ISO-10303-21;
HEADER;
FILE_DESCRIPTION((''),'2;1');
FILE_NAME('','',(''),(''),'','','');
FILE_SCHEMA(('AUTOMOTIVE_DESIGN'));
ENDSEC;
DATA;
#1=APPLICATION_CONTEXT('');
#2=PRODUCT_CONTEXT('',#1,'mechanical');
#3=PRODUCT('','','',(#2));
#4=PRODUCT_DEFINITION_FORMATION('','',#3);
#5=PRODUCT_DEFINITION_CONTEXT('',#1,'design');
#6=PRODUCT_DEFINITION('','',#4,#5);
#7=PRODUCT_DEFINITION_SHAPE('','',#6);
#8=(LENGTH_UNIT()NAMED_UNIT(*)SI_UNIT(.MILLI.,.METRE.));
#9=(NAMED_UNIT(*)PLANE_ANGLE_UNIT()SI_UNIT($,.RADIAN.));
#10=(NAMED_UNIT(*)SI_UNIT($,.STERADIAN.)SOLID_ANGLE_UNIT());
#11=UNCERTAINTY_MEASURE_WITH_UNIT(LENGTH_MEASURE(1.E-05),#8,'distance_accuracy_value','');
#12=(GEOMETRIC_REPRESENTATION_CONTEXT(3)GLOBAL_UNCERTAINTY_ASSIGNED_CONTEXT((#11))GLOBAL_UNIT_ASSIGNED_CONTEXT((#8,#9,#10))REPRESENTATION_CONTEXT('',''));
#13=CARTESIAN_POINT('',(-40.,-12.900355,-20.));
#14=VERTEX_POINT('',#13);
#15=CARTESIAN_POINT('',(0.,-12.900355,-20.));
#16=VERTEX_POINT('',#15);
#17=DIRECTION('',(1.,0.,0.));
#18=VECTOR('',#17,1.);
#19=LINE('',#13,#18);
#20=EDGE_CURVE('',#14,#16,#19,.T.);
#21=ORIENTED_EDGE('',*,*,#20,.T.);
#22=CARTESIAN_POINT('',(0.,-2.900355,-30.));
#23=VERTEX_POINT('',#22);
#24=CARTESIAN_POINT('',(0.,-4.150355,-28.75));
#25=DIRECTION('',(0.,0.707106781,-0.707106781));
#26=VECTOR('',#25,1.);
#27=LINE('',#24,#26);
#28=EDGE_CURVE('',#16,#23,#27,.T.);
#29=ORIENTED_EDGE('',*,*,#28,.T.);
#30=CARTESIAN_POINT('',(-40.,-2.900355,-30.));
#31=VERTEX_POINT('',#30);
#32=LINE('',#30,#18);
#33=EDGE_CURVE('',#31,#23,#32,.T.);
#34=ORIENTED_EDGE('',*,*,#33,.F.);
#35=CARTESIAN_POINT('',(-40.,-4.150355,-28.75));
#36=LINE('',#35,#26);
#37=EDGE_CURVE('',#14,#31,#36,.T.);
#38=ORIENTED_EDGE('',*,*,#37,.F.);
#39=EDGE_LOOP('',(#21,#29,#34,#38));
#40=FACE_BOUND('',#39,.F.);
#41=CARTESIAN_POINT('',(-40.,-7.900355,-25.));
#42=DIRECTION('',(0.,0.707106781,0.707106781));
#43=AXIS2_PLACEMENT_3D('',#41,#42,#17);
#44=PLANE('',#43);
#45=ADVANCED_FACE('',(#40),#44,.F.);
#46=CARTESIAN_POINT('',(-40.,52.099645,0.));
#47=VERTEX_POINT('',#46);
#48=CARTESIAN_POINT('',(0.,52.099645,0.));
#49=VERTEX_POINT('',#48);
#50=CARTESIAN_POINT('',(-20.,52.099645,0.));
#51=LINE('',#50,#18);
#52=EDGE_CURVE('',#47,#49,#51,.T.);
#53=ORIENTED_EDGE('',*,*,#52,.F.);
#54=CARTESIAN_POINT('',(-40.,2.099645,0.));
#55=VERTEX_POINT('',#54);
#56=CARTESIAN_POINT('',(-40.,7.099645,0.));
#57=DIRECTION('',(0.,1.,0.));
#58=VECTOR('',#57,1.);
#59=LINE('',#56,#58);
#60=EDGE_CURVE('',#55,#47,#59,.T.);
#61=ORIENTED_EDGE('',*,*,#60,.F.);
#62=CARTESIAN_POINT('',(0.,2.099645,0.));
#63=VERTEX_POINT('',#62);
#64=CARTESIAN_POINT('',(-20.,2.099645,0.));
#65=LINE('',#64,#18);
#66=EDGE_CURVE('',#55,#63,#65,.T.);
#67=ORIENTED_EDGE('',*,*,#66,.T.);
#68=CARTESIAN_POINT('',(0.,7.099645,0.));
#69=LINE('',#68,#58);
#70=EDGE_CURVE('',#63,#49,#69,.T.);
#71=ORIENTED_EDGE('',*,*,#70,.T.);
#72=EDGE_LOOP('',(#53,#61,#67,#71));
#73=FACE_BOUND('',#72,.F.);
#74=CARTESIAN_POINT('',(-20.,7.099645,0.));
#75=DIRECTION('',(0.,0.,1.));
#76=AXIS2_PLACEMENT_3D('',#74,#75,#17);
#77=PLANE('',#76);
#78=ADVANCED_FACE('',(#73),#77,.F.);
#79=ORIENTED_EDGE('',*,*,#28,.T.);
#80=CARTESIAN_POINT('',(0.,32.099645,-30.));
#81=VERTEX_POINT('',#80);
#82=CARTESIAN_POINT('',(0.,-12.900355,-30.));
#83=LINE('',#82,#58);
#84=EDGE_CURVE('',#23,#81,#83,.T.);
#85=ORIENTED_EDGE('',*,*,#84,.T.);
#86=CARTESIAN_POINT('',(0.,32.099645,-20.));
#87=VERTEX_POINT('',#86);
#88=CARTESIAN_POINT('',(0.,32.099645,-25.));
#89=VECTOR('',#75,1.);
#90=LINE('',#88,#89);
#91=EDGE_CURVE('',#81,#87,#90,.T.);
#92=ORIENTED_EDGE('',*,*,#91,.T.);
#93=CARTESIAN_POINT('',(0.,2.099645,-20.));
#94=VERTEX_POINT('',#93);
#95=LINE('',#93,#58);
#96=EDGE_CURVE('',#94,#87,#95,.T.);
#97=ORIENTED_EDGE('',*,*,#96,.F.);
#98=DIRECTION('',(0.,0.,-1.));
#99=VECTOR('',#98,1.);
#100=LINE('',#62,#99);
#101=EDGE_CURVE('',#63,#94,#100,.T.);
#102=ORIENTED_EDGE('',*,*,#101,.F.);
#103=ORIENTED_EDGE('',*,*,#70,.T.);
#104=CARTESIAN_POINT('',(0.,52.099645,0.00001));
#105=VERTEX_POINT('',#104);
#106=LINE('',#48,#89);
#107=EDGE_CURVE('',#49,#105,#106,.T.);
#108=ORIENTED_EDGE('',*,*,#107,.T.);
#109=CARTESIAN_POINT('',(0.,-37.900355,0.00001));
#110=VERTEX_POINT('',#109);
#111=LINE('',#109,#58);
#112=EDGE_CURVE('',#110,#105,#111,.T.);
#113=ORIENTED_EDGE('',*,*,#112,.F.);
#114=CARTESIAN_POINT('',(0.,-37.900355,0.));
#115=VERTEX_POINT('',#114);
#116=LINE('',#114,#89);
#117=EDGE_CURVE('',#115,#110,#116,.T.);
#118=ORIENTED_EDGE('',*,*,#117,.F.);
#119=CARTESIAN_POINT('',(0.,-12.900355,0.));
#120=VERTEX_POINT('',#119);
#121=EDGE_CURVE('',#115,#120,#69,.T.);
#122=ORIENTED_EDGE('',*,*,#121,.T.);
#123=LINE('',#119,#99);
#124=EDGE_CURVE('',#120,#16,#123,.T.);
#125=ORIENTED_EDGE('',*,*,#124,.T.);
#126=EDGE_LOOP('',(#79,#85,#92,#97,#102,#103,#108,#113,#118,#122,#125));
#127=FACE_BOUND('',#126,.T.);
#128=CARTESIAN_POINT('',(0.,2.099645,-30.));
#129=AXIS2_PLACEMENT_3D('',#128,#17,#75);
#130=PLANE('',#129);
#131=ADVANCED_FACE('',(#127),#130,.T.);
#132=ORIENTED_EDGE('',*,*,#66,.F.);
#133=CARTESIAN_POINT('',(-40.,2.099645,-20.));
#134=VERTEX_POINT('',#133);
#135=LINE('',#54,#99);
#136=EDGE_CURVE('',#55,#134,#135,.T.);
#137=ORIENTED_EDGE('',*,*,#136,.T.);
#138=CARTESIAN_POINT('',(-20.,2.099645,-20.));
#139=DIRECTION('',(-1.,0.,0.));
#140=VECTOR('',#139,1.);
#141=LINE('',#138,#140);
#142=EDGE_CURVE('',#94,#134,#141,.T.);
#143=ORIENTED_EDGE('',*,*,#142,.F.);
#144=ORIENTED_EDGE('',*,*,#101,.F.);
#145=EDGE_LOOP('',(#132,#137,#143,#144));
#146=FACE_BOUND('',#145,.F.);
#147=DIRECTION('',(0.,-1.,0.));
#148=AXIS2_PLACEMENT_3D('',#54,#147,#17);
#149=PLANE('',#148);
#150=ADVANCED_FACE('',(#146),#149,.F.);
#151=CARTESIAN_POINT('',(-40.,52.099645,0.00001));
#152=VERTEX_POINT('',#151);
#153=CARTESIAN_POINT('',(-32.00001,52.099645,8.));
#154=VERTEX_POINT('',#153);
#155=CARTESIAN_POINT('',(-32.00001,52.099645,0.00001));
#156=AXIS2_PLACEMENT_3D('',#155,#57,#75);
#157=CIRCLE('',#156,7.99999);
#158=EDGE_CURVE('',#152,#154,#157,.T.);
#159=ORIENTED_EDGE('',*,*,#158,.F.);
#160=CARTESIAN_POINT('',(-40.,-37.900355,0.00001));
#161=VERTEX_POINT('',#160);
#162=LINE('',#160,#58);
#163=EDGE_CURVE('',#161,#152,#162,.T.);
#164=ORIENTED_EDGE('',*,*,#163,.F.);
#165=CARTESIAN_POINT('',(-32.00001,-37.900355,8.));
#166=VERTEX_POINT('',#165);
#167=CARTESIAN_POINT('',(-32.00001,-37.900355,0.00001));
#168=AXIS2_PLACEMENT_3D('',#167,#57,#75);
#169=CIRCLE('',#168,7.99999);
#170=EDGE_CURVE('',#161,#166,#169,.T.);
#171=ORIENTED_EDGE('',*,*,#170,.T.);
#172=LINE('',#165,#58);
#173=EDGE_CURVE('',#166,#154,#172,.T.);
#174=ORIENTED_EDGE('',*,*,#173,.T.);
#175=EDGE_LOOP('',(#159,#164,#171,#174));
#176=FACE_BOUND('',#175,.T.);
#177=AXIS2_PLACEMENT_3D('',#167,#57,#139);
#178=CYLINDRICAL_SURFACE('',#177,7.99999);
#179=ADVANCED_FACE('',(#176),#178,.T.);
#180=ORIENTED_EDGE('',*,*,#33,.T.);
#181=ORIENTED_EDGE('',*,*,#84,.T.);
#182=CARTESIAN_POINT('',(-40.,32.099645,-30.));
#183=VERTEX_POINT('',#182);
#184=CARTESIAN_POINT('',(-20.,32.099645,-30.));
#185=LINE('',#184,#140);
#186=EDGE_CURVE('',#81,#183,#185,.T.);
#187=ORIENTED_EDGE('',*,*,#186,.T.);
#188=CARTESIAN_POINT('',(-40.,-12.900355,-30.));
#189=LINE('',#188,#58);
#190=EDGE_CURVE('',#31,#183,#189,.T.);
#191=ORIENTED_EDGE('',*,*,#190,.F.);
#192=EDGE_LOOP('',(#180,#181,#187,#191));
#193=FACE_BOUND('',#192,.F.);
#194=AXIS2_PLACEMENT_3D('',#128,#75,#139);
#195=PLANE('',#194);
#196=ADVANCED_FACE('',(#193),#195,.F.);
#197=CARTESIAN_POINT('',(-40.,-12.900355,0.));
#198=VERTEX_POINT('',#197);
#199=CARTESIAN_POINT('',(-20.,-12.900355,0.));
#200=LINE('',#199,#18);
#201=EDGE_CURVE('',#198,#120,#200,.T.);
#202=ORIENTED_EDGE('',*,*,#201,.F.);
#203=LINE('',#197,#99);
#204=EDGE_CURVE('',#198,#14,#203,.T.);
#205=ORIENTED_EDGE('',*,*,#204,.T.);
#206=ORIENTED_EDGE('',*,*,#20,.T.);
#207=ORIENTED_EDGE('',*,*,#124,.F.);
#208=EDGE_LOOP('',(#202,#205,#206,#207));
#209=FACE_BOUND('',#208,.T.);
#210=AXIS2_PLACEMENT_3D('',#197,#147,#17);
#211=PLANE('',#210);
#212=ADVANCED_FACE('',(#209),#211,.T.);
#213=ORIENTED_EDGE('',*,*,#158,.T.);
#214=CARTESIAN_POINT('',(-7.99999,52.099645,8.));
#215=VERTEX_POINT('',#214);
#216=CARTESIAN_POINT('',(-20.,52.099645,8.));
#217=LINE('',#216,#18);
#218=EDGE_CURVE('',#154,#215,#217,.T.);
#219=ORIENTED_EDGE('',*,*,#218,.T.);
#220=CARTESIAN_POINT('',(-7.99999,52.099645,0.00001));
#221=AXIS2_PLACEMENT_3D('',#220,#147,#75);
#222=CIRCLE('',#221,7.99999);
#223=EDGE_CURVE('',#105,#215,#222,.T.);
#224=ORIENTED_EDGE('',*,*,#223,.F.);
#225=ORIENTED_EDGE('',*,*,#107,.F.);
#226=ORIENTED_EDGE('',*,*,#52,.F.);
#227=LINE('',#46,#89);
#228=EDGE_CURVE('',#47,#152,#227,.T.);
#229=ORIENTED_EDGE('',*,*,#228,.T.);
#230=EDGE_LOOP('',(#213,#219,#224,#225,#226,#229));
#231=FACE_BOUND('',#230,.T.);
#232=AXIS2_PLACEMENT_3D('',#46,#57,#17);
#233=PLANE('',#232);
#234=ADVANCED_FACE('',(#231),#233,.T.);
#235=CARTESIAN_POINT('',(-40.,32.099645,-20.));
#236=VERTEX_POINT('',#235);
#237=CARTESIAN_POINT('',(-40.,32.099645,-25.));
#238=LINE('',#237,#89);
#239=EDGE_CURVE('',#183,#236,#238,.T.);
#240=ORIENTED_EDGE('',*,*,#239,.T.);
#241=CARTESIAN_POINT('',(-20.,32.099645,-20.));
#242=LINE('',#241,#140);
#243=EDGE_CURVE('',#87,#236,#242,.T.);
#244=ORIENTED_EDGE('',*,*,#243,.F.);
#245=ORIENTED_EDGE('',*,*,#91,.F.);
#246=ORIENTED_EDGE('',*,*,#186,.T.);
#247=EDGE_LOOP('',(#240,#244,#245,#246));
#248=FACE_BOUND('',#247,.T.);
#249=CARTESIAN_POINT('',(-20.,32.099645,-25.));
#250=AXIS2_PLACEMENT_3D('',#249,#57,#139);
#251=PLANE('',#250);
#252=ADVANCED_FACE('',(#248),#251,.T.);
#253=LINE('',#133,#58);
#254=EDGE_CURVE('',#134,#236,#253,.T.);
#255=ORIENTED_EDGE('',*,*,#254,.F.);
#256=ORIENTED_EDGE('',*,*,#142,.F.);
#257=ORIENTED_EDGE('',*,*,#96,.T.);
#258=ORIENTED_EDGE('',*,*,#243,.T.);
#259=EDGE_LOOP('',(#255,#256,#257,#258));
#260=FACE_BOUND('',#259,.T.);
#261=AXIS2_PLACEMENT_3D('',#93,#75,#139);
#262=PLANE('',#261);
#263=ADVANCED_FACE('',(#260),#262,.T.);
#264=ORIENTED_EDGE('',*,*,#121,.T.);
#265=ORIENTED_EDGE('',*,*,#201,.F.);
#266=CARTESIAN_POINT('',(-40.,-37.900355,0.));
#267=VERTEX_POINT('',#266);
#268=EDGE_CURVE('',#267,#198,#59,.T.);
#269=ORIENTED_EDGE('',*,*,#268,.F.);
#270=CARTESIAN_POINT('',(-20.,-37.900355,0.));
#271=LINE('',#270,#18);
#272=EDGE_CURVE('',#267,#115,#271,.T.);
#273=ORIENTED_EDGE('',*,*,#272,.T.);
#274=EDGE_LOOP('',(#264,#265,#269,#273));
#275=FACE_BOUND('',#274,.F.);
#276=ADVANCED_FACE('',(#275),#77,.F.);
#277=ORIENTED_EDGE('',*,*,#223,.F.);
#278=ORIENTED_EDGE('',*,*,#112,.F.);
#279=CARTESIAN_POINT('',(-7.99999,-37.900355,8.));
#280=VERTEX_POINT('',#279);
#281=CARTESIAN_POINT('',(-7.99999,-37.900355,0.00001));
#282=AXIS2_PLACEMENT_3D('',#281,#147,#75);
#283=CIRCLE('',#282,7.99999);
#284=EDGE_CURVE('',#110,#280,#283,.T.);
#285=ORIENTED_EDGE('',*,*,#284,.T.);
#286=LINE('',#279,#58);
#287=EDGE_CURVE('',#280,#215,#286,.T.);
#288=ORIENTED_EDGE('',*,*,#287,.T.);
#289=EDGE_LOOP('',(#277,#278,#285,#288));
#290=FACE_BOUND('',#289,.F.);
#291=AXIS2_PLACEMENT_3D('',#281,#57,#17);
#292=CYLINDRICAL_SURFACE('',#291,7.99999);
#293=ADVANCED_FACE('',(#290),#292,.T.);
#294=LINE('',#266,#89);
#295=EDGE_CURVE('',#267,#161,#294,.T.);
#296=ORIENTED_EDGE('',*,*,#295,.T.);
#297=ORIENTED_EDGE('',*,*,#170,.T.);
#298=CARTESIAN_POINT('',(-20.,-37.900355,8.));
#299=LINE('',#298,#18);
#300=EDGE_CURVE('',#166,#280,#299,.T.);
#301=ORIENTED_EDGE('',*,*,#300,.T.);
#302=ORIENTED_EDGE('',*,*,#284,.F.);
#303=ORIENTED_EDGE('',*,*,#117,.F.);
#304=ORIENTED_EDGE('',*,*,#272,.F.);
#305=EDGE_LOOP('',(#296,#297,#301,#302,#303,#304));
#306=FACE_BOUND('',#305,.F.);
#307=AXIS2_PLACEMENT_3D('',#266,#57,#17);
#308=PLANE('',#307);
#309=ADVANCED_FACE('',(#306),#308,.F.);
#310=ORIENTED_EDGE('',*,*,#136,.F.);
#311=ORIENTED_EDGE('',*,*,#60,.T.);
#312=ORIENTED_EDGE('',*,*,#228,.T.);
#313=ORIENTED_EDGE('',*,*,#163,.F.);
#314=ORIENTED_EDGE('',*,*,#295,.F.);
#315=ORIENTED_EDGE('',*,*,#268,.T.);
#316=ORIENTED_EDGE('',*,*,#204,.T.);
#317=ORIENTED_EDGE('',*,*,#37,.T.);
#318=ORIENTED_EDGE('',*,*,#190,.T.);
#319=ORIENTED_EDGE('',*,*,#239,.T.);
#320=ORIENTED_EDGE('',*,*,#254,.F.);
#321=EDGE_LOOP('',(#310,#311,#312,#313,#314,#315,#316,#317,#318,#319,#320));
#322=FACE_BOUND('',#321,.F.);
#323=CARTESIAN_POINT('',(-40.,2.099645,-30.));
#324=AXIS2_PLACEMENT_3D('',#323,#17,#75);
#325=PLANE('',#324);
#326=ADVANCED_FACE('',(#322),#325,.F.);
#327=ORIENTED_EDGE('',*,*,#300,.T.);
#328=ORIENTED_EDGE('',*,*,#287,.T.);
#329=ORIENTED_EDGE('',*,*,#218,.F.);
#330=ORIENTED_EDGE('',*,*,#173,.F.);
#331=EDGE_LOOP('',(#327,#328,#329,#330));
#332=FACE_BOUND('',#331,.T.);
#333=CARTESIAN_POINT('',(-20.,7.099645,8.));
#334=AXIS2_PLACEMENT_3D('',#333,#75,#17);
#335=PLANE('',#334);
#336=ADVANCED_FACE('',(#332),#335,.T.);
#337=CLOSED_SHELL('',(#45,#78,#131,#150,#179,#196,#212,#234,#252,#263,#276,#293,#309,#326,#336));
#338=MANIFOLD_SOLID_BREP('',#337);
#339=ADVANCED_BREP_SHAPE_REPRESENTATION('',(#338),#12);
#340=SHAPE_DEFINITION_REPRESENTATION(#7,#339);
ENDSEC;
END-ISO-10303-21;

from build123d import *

# Parameters (mm, degrees)
F0_W     = 40
F0_H     = 90
F1_DEPTH = 8
F2_W     = 40
F2_H     = 15
F3_DEPTH = 30
F4_W     = 40
F4_H     = 10
F5_DEPTH = 30
F6_R     = 7.99999
F7_SIZE2 = 10
F7_SIZE  = 10


# Not quite as in the source:
# - a fillet or chamfer is up to 0.001 mm smaller than in the source, because OpenCascade refuses the exact size


with BuildPart() as f1:
    # F0 (on Top) → F1 (new body)
    with BuildSketch(Plane.XY):
        with Locations((-20, 7.0996452868)):
            Rectangle(F0_W, F0_H)
    extrude(amount=F1_DEPTH)

    # F2 (on face) → F3 (join)
    with BuildSketch(Plane(origin=(0, 0, 0), x_dir=(1, 0, 0), z_dir=(0, 0, -1))):
        with Locations((-20, 5.4003547132)):
            Rectangle(F2_W, F2_H)
    extrude(amount=F3_DEPTH)

    # F4 (on face) → F5 (join)
    with BuildSketch(Plane(origin=(0, 2.0996452868, 0), x_dir=(-1, 0, 0), z_dir=(0, 1, 0))):
        with Locations((20, -25)):
            Rectangle(F4_W, F4_H)
    extrude(amount=F5_DEPTH)

    # F6 (radius 8 in the source; OpenCascade refuses exactly that, so slightly less here)
    f6_edges = [f1.edges().sort_by_distance(p)[0] for p in [
        (0, 7.099645, 8),
        (-40, 7.099645, 8),
    ]]
    fillet(f6_edges, radius=F6_R)

    # F7
    f7_edges = [f1.edges().sort_by_distance(p)[0] for p in [
        (-20, -12.900355, -30),
    ]]
    chamfer(f7_edges, length=F7_SIZE, length2=F7_SIZE2)


solid = f1.part
